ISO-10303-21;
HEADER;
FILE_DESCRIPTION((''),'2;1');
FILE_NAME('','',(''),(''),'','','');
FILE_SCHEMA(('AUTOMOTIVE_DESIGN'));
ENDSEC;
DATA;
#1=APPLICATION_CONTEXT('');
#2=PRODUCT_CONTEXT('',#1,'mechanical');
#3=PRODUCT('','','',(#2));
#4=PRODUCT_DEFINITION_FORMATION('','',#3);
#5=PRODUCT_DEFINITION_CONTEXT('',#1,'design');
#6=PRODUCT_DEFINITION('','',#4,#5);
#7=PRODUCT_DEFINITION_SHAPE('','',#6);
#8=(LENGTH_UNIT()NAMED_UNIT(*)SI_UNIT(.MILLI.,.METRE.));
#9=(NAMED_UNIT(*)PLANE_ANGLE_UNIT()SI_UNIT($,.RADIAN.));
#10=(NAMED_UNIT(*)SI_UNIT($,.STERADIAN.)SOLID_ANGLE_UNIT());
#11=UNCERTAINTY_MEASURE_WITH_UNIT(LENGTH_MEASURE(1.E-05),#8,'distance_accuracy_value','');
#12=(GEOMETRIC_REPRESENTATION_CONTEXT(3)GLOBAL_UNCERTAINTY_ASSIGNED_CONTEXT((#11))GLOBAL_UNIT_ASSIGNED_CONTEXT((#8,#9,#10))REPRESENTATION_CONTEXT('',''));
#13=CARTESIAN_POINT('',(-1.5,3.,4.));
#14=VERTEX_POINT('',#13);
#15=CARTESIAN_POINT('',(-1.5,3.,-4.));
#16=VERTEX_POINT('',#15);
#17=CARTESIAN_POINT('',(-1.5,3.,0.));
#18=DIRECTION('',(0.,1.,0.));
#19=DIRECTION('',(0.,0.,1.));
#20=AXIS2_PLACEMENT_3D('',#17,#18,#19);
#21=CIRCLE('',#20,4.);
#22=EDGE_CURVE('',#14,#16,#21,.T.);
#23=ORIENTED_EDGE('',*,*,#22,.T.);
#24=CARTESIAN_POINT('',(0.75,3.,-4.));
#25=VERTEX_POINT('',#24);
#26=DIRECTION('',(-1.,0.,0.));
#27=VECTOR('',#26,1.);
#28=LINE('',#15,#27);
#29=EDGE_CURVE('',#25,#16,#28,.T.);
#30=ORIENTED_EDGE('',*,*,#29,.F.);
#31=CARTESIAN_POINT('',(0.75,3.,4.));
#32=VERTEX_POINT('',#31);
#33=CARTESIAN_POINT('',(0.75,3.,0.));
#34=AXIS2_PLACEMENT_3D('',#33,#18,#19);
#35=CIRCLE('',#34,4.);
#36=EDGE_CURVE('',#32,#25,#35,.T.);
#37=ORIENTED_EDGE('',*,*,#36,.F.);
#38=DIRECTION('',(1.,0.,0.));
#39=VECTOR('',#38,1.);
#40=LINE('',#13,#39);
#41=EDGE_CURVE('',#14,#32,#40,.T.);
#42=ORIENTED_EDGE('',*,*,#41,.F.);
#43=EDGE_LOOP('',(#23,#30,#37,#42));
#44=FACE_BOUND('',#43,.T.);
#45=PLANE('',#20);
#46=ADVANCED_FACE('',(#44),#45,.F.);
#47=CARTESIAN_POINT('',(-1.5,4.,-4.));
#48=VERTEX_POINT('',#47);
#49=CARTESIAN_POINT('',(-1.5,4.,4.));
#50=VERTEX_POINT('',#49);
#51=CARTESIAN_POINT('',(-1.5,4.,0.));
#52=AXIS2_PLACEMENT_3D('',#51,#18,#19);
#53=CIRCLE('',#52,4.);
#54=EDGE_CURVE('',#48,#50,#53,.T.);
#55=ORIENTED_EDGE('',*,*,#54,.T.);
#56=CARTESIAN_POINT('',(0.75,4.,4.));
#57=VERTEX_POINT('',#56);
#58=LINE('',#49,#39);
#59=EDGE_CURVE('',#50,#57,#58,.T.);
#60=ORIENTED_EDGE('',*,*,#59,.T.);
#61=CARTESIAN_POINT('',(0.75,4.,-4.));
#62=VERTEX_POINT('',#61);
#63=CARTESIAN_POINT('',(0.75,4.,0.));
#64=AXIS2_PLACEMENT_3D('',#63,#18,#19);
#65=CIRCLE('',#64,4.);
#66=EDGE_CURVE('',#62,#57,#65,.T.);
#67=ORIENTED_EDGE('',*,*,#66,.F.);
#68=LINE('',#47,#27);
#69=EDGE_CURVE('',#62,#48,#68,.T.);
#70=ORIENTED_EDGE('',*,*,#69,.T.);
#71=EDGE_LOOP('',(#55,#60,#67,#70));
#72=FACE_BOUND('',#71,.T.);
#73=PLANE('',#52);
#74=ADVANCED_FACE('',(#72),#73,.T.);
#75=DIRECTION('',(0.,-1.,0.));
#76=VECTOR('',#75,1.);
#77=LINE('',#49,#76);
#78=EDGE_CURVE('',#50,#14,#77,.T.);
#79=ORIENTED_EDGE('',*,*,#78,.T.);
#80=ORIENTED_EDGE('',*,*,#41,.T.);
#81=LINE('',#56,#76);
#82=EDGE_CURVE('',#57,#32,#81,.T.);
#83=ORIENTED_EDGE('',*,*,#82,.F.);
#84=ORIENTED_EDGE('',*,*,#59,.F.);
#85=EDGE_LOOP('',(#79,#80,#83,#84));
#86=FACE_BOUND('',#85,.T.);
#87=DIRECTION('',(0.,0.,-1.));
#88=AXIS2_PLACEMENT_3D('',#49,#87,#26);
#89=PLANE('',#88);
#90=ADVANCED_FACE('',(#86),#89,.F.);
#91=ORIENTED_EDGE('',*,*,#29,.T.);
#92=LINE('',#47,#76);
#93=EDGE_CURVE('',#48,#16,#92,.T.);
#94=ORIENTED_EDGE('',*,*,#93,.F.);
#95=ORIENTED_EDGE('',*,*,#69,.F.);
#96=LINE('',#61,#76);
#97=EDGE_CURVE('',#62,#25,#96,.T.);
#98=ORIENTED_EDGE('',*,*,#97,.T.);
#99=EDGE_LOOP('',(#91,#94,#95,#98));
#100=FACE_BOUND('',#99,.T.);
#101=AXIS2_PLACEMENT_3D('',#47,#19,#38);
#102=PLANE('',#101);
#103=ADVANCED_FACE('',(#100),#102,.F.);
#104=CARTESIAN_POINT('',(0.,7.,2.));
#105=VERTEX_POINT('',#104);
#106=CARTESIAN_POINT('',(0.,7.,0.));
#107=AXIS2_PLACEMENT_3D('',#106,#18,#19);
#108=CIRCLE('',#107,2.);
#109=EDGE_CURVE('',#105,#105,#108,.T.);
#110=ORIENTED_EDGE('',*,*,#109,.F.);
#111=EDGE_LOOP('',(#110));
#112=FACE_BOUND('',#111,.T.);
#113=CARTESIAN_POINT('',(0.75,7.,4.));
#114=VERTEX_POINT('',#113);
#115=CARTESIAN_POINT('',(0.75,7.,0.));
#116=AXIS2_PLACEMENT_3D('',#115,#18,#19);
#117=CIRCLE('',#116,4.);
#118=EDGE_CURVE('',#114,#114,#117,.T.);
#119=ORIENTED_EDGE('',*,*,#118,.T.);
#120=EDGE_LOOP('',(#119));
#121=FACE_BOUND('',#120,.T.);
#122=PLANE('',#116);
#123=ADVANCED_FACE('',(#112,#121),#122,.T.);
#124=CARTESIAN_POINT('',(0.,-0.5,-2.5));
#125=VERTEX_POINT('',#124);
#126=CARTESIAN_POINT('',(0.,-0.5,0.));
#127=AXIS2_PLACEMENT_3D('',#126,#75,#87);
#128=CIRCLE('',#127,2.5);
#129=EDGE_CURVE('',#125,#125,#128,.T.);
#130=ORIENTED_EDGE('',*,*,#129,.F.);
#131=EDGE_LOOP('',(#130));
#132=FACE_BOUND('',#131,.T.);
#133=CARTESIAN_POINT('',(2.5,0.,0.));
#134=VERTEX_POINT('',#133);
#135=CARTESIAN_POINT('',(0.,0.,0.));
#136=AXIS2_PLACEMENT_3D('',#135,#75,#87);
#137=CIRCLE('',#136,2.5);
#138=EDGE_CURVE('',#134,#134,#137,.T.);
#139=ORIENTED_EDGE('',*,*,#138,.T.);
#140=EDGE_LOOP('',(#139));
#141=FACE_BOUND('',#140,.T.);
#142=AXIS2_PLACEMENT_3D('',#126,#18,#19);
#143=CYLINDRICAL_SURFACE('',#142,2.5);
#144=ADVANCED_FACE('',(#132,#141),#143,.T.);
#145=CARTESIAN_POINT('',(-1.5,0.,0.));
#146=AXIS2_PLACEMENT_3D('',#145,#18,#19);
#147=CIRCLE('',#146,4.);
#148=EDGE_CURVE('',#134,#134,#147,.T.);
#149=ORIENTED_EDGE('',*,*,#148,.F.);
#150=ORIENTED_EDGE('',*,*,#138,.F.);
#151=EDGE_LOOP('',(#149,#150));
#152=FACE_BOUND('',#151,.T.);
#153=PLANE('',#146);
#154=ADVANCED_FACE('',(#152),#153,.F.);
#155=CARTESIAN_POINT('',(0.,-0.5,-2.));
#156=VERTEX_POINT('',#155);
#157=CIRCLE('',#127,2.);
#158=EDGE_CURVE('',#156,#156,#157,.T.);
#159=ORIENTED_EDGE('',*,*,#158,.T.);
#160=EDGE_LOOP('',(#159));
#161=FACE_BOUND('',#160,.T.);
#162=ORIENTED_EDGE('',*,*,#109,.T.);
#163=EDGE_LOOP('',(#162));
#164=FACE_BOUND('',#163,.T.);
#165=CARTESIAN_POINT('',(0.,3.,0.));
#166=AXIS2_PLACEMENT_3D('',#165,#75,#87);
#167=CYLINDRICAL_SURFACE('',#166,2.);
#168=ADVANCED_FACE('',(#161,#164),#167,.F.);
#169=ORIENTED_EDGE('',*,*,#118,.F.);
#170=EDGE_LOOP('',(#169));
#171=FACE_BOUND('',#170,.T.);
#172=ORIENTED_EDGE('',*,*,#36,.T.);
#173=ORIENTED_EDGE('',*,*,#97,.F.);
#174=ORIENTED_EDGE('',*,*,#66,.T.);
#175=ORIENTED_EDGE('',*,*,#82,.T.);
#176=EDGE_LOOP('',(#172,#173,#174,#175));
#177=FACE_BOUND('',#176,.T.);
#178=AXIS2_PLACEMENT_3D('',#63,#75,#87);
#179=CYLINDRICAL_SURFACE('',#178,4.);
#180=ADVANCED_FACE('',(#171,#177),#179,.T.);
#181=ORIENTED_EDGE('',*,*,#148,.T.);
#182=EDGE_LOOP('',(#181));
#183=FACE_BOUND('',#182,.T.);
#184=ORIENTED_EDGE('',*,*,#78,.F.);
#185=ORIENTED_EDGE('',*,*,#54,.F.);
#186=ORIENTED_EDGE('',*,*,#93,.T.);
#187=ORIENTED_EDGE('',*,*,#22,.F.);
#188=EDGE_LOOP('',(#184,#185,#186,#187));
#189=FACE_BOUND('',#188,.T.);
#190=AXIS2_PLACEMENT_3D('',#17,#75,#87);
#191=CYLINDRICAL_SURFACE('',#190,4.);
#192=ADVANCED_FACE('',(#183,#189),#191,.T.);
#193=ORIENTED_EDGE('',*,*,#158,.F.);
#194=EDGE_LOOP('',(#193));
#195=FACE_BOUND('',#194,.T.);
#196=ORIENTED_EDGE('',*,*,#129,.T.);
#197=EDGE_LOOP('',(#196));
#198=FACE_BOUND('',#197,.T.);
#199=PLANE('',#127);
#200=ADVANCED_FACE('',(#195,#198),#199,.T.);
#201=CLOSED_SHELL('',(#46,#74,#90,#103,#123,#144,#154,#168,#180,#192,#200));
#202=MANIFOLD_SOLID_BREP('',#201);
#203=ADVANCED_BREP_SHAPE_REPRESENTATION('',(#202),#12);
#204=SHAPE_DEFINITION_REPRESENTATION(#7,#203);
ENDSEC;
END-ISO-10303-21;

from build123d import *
from build123d.topology import SkipClean

# Parameters (mm, degrees)
SKETCH_1_R      = 4
SKETCH_1_R_2    = 2
EXTRUDE_1_DEPTH = 3
SKETCH_2_R      = 2
EXTRUDE_2_DEPTH = 1
SKETCH_3_R      = 4
SKETCH_3_R_2    = 2
EXTRUDE_3_DEPTH = 3
EXTRUDE_START   = 0.5
SKETCH_4_R      = 2.5
SKETCH_4_R_2    = 2
EXTRUDE_4_DEPTH = 0.5


with BuildPart() as part:
    # 草图1 → 凸台-拉伸1 (new body)
    with BuildSketch(Plane(origin=(0, 0, 0), x_dir=(1, 0, 0), z_dir=(0, 1, 0))):
        with Locations((-1.5, 0)):
            Circle(SKETCH_1_R)
        Circle(SKETCH_1_R_2, mode=Mode.SUBTRACT)
    extrude(amount=EXTRUDE_1_DEPTH)

    # 草图2 → 凸台-拉伸2 (add)
    with BuildSketch(Plane(origin=(0, 3, 0), x_dir=(1, 0, 0), z_dir=(0, 1, 0))):
        with BuildLine():
            Line((-1.5, 4), (0.75, 4))
            ThreePointArc((0.75, 4), (4.75, 0), (0.75, -4))
            Line((0.75, -4), (-1.5, -4))
            ThreePointArc((-1.5, -4), (-5.5, 0), (-1.5, 4))
        make_face()
        Circle(SKETCH_2_R, mode=Mode.SUBTRACT)
    extrude(amount=EXTRUDE_2_DEPTH)

    # 草图3 → 凸台-拉伸3 (add)
    with SkipClean():  # the faces are left unmerged after this step: merging them gives an invalid solid
        with BuildSketch(Plane(origin=(0, 4, 0), x_dir=(1, 0, 0), z_dir=(0, 1, 0))):
            with Locations((0.75, 0)):
                Circle(SKETCH_3_R)
            Circle(SKETCH_3_R_2, mode=Mode.SUBTRACT)
        extrude(amount=EXTRUDE_3_DEPTH)
    add(part.part.scale(1), mode=Mode.REPLACE)  # the faces are merged on a copy

    # 草图4 → 凸台-拉伸4 (add)
    with BuildSketch(Plane.XZ.offset(EXTRUDE_START)):
        Circle(SKETCH_4_R)
        Circle(SKETCH_4_R_2, mode=Mode.SUBTRACT)
    extrude(amount=-EXTRUDE_4_DEPTH)


solid = part.part
